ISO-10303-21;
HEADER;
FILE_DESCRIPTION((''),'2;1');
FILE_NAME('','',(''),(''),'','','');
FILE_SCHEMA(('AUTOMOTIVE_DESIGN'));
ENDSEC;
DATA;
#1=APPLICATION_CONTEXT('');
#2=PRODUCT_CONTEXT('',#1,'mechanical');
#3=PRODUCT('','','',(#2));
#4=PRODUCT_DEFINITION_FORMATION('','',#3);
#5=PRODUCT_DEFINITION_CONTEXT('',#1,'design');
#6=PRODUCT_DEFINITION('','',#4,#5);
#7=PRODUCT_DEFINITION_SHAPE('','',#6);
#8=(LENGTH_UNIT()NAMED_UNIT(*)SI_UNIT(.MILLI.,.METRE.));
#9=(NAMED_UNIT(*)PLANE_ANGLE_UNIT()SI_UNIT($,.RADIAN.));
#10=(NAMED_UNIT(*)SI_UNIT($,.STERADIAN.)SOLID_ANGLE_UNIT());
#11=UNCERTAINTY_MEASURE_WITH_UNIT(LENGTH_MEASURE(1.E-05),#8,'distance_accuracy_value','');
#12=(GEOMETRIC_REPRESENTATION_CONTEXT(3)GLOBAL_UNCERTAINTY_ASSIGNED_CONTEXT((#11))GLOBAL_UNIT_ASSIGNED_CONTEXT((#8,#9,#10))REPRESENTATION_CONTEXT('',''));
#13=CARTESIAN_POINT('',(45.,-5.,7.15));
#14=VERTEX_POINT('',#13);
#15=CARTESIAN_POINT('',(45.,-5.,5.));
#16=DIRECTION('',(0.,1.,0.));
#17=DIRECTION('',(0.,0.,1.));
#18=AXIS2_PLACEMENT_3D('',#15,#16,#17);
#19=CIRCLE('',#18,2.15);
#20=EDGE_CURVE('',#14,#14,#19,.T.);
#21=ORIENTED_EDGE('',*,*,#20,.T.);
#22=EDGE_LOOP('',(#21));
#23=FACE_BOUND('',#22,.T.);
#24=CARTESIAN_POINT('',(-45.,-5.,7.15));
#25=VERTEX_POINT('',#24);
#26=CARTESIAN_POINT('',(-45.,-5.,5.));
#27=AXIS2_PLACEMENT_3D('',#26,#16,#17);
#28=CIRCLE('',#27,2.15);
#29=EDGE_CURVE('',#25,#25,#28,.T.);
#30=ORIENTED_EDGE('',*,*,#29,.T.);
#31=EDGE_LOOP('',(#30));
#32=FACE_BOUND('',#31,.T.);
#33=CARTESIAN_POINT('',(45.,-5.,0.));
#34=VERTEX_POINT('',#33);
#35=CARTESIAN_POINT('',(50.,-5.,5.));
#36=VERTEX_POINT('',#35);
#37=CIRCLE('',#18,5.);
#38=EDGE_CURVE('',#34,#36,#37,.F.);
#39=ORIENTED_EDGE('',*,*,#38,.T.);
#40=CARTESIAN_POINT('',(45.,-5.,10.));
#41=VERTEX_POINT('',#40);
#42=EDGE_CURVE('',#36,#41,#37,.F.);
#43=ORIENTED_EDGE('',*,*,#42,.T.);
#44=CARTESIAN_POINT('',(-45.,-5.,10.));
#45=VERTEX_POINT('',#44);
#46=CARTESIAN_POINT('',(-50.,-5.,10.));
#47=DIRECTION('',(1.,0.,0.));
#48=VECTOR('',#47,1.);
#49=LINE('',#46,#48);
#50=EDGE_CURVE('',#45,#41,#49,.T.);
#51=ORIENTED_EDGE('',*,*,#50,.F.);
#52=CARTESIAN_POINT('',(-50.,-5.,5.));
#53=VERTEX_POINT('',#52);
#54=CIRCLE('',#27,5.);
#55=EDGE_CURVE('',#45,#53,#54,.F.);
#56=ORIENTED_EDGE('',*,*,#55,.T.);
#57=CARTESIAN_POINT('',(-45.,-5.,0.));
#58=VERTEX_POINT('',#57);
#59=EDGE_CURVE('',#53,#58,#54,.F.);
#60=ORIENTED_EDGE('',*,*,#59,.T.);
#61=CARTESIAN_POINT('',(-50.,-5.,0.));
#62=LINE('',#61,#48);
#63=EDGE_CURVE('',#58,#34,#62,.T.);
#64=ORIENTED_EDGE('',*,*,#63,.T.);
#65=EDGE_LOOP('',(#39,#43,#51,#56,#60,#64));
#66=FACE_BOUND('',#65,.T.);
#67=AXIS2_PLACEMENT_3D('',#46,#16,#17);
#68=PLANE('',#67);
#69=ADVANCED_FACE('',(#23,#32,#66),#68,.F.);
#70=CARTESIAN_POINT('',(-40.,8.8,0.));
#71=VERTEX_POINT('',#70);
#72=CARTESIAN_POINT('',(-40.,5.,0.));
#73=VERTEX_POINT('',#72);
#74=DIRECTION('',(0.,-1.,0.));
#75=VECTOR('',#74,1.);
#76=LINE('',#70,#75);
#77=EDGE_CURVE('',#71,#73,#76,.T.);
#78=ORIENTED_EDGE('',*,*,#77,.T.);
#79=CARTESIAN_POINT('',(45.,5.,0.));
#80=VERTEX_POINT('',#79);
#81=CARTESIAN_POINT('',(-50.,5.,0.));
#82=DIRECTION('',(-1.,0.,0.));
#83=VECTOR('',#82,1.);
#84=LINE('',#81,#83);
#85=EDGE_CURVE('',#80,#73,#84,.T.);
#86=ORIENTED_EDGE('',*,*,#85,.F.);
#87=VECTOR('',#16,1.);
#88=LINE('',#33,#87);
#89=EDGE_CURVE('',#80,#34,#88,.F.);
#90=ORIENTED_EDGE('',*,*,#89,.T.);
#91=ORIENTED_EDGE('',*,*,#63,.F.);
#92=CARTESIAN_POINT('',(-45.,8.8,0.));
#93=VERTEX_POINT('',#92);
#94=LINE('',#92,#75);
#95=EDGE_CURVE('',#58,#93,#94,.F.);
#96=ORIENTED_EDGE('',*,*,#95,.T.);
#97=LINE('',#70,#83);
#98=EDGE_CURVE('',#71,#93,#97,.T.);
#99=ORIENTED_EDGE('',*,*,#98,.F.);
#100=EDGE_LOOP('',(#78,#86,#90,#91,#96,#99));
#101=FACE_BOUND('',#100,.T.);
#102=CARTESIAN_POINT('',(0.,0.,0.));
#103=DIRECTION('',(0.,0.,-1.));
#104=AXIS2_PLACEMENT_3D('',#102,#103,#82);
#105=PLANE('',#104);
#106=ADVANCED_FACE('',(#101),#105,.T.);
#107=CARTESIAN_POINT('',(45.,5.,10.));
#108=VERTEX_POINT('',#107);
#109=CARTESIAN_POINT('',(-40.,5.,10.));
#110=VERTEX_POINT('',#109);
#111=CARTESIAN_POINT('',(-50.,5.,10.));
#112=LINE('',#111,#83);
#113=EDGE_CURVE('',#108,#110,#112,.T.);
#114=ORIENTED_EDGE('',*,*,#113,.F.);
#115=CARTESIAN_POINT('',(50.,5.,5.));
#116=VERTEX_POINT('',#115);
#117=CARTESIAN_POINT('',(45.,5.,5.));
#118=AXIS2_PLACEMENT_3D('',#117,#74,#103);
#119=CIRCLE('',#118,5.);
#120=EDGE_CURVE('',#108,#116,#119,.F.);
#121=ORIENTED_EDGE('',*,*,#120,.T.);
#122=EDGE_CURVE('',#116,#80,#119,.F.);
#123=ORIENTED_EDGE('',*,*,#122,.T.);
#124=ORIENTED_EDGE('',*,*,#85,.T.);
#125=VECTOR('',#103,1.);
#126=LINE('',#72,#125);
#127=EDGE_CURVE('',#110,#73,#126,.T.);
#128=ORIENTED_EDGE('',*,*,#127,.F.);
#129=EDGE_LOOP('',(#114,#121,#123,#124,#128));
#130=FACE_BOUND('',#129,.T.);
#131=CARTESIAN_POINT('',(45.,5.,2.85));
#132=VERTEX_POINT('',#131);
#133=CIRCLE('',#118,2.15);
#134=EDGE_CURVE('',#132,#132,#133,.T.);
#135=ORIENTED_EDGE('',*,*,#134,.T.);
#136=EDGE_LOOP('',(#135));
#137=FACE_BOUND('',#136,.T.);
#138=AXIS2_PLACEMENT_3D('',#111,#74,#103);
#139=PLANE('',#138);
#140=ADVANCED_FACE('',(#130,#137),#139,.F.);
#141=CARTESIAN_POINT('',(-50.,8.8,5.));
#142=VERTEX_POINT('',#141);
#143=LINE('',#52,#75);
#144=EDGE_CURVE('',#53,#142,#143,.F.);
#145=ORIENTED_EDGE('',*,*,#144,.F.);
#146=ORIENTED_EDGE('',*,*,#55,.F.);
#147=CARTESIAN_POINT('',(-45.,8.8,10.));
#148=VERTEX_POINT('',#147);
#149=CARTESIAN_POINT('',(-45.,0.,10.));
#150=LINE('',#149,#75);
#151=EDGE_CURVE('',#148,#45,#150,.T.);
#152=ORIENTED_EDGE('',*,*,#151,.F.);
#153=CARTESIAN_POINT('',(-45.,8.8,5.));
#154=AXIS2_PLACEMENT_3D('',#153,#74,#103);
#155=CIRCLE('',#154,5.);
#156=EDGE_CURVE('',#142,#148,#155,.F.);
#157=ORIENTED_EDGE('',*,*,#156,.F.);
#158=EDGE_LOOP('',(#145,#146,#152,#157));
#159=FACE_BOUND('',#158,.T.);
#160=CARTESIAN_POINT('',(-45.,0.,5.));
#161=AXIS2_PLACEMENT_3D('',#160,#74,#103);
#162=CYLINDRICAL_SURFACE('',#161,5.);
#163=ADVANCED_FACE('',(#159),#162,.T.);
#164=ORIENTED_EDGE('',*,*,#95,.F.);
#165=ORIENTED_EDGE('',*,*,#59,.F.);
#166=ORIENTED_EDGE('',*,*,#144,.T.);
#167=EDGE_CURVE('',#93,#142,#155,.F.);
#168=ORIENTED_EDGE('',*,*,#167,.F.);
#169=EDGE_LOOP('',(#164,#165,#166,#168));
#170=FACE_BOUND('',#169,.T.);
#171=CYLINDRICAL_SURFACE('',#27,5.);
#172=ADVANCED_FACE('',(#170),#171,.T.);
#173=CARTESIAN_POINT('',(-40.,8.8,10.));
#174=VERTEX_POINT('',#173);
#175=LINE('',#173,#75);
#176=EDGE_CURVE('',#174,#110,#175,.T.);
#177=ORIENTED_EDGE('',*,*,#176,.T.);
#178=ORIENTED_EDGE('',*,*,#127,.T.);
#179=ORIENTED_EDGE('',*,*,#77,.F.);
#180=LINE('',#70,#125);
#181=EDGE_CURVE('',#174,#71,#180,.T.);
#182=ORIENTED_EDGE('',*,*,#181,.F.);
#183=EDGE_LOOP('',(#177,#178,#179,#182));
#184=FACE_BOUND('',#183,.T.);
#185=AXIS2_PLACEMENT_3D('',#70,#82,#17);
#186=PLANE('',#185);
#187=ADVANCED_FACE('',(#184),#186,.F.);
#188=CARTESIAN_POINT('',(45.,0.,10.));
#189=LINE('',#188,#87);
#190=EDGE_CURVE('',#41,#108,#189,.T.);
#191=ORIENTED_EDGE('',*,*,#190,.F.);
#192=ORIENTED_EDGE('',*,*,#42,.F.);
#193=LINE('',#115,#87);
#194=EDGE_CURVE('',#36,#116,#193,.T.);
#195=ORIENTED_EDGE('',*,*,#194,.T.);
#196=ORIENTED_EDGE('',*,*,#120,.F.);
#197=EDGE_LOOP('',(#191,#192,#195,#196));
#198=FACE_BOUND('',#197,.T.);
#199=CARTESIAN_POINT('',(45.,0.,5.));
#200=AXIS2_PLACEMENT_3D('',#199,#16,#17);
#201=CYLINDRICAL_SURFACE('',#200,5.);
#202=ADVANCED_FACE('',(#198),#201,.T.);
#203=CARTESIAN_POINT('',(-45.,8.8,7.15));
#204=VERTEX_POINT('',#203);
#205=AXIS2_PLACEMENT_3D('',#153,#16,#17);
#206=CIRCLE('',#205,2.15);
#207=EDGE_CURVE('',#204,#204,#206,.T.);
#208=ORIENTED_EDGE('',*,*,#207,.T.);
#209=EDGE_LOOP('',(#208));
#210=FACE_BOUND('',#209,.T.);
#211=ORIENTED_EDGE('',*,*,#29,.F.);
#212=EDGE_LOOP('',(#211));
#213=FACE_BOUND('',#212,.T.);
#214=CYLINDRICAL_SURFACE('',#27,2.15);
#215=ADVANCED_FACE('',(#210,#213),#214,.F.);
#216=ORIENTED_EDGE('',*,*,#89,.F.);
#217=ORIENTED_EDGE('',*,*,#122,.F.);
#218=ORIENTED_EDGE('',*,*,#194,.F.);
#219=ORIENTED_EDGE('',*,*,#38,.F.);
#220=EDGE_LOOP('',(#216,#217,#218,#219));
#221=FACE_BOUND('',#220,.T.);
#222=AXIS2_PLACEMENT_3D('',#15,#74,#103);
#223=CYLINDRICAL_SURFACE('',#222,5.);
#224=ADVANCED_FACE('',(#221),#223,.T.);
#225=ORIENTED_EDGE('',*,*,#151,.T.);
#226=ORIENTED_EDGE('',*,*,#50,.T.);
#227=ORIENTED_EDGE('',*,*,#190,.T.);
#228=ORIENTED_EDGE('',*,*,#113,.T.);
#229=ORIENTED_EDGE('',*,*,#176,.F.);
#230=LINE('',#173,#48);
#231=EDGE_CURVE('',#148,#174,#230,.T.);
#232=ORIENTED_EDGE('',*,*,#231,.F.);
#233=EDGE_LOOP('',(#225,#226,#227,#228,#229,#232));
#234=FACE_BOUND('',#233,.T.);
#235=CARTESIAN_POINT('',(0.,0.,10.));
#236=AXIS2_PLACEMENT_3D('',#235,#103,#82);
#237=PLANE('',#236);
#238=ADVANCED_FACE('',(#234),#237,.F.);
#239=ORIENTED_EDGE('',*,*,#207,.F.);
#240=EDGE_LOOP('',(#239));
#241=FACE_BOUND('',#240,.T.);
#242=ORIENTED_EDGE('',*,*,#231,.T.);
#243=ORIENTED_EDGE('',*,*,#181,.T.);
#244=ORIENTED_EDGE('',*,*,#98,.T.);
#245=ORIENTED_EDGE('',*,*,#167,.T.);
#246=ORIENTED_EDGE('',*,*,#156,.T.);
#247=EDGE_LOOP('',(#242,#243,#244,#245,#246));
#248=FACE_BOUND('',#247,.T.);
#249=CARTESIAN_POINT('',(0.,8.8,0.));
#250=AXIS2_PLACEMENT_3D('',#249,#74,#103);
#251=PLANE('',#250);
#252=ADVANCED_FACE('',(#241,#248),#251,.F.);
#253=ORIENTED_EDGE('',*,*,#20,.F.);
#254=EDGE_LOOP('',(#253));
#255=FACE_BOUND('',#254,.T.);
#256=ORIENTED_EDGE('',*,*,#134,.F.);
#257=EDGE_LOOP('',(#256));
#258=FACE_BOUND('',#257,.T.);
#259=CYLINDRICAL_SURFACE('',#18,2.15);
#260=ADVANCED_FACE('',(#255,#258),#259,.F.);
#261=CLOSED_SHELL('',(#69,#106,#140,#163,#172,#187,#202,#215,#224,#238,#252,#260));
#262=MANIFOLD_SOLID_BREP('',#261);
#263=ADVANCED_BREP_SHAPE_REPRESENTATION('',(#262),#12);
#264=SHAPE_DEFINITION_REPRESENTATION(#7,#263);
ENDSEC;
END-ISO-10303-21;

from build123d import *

# Parameters (mm, degrees)
SKETCH_1_W          = 100
SKETCH_1_H          = 10
EXTRUDE_1_DEPTH     = 10
SKETCH_4_W          = 10
SKETCH_4_H          = 10
EXTRUDE_2_DEPTH     = 3.8
FILLET_1_R          = 5
SKETCH_2_R          = 2.15
CUT_EXTRUDE_1_DEPTH = 53.824615474


with BuildPart() as part:
    # 스케치1 → 보스-돌출1 (new body)
    with BuildSketch(Plane.XY):
        Rectangle(SKETCH_1_W, SKETCH_1_H)
    extrude(amount=EXTRUDE_1_DEPTH)

    # 스케치4 → 보스-돌출2 (add)
    with BuildSketch(Plane(origin=(0, 5, 0), x_dir=(1, 0, 0), z_dir=(0, 1, 0))):
        with Locations((-45, -5)):
            Rectangle(SKETCH_4_W, SKETCH_4_H)
    extrude(amount=EXTRUDE_2_DEPTH)

    # 필렛1
    fillet_1_edges = [part.edges().sort_by_distance(p)[0] for p in [
        (50, 0, 0),
        (50, 0, 10),
        (-50, 1.9, 0),
        (-50, 1.9, 10),
    ]]
    fillet(fillet_1_edges, radius=FILLET_1_R - 0.0001)  # a hair under: the kernel refuses the full size

    # 스케치2 → 컷-돌출1 (cut, through all)
    with BuildSketch(Plane(origin=(0, 8.8, 0), x_dir=(1, 0, 0), z_dir=(0, 1, 0))):
        with Locations(Location((-45, -5, 0), (0, 0, 270))):
            Circle(SKETCH_2_R)
        with Locations(Location((45, -5, 0), (0, 0, 270))):
            Circle(SKETCH_2_R)
    extrude(amount=-CUT_EXTRUDE_1_DEPTH, mode=Mode.SUBTRACT)


solid = part.part
